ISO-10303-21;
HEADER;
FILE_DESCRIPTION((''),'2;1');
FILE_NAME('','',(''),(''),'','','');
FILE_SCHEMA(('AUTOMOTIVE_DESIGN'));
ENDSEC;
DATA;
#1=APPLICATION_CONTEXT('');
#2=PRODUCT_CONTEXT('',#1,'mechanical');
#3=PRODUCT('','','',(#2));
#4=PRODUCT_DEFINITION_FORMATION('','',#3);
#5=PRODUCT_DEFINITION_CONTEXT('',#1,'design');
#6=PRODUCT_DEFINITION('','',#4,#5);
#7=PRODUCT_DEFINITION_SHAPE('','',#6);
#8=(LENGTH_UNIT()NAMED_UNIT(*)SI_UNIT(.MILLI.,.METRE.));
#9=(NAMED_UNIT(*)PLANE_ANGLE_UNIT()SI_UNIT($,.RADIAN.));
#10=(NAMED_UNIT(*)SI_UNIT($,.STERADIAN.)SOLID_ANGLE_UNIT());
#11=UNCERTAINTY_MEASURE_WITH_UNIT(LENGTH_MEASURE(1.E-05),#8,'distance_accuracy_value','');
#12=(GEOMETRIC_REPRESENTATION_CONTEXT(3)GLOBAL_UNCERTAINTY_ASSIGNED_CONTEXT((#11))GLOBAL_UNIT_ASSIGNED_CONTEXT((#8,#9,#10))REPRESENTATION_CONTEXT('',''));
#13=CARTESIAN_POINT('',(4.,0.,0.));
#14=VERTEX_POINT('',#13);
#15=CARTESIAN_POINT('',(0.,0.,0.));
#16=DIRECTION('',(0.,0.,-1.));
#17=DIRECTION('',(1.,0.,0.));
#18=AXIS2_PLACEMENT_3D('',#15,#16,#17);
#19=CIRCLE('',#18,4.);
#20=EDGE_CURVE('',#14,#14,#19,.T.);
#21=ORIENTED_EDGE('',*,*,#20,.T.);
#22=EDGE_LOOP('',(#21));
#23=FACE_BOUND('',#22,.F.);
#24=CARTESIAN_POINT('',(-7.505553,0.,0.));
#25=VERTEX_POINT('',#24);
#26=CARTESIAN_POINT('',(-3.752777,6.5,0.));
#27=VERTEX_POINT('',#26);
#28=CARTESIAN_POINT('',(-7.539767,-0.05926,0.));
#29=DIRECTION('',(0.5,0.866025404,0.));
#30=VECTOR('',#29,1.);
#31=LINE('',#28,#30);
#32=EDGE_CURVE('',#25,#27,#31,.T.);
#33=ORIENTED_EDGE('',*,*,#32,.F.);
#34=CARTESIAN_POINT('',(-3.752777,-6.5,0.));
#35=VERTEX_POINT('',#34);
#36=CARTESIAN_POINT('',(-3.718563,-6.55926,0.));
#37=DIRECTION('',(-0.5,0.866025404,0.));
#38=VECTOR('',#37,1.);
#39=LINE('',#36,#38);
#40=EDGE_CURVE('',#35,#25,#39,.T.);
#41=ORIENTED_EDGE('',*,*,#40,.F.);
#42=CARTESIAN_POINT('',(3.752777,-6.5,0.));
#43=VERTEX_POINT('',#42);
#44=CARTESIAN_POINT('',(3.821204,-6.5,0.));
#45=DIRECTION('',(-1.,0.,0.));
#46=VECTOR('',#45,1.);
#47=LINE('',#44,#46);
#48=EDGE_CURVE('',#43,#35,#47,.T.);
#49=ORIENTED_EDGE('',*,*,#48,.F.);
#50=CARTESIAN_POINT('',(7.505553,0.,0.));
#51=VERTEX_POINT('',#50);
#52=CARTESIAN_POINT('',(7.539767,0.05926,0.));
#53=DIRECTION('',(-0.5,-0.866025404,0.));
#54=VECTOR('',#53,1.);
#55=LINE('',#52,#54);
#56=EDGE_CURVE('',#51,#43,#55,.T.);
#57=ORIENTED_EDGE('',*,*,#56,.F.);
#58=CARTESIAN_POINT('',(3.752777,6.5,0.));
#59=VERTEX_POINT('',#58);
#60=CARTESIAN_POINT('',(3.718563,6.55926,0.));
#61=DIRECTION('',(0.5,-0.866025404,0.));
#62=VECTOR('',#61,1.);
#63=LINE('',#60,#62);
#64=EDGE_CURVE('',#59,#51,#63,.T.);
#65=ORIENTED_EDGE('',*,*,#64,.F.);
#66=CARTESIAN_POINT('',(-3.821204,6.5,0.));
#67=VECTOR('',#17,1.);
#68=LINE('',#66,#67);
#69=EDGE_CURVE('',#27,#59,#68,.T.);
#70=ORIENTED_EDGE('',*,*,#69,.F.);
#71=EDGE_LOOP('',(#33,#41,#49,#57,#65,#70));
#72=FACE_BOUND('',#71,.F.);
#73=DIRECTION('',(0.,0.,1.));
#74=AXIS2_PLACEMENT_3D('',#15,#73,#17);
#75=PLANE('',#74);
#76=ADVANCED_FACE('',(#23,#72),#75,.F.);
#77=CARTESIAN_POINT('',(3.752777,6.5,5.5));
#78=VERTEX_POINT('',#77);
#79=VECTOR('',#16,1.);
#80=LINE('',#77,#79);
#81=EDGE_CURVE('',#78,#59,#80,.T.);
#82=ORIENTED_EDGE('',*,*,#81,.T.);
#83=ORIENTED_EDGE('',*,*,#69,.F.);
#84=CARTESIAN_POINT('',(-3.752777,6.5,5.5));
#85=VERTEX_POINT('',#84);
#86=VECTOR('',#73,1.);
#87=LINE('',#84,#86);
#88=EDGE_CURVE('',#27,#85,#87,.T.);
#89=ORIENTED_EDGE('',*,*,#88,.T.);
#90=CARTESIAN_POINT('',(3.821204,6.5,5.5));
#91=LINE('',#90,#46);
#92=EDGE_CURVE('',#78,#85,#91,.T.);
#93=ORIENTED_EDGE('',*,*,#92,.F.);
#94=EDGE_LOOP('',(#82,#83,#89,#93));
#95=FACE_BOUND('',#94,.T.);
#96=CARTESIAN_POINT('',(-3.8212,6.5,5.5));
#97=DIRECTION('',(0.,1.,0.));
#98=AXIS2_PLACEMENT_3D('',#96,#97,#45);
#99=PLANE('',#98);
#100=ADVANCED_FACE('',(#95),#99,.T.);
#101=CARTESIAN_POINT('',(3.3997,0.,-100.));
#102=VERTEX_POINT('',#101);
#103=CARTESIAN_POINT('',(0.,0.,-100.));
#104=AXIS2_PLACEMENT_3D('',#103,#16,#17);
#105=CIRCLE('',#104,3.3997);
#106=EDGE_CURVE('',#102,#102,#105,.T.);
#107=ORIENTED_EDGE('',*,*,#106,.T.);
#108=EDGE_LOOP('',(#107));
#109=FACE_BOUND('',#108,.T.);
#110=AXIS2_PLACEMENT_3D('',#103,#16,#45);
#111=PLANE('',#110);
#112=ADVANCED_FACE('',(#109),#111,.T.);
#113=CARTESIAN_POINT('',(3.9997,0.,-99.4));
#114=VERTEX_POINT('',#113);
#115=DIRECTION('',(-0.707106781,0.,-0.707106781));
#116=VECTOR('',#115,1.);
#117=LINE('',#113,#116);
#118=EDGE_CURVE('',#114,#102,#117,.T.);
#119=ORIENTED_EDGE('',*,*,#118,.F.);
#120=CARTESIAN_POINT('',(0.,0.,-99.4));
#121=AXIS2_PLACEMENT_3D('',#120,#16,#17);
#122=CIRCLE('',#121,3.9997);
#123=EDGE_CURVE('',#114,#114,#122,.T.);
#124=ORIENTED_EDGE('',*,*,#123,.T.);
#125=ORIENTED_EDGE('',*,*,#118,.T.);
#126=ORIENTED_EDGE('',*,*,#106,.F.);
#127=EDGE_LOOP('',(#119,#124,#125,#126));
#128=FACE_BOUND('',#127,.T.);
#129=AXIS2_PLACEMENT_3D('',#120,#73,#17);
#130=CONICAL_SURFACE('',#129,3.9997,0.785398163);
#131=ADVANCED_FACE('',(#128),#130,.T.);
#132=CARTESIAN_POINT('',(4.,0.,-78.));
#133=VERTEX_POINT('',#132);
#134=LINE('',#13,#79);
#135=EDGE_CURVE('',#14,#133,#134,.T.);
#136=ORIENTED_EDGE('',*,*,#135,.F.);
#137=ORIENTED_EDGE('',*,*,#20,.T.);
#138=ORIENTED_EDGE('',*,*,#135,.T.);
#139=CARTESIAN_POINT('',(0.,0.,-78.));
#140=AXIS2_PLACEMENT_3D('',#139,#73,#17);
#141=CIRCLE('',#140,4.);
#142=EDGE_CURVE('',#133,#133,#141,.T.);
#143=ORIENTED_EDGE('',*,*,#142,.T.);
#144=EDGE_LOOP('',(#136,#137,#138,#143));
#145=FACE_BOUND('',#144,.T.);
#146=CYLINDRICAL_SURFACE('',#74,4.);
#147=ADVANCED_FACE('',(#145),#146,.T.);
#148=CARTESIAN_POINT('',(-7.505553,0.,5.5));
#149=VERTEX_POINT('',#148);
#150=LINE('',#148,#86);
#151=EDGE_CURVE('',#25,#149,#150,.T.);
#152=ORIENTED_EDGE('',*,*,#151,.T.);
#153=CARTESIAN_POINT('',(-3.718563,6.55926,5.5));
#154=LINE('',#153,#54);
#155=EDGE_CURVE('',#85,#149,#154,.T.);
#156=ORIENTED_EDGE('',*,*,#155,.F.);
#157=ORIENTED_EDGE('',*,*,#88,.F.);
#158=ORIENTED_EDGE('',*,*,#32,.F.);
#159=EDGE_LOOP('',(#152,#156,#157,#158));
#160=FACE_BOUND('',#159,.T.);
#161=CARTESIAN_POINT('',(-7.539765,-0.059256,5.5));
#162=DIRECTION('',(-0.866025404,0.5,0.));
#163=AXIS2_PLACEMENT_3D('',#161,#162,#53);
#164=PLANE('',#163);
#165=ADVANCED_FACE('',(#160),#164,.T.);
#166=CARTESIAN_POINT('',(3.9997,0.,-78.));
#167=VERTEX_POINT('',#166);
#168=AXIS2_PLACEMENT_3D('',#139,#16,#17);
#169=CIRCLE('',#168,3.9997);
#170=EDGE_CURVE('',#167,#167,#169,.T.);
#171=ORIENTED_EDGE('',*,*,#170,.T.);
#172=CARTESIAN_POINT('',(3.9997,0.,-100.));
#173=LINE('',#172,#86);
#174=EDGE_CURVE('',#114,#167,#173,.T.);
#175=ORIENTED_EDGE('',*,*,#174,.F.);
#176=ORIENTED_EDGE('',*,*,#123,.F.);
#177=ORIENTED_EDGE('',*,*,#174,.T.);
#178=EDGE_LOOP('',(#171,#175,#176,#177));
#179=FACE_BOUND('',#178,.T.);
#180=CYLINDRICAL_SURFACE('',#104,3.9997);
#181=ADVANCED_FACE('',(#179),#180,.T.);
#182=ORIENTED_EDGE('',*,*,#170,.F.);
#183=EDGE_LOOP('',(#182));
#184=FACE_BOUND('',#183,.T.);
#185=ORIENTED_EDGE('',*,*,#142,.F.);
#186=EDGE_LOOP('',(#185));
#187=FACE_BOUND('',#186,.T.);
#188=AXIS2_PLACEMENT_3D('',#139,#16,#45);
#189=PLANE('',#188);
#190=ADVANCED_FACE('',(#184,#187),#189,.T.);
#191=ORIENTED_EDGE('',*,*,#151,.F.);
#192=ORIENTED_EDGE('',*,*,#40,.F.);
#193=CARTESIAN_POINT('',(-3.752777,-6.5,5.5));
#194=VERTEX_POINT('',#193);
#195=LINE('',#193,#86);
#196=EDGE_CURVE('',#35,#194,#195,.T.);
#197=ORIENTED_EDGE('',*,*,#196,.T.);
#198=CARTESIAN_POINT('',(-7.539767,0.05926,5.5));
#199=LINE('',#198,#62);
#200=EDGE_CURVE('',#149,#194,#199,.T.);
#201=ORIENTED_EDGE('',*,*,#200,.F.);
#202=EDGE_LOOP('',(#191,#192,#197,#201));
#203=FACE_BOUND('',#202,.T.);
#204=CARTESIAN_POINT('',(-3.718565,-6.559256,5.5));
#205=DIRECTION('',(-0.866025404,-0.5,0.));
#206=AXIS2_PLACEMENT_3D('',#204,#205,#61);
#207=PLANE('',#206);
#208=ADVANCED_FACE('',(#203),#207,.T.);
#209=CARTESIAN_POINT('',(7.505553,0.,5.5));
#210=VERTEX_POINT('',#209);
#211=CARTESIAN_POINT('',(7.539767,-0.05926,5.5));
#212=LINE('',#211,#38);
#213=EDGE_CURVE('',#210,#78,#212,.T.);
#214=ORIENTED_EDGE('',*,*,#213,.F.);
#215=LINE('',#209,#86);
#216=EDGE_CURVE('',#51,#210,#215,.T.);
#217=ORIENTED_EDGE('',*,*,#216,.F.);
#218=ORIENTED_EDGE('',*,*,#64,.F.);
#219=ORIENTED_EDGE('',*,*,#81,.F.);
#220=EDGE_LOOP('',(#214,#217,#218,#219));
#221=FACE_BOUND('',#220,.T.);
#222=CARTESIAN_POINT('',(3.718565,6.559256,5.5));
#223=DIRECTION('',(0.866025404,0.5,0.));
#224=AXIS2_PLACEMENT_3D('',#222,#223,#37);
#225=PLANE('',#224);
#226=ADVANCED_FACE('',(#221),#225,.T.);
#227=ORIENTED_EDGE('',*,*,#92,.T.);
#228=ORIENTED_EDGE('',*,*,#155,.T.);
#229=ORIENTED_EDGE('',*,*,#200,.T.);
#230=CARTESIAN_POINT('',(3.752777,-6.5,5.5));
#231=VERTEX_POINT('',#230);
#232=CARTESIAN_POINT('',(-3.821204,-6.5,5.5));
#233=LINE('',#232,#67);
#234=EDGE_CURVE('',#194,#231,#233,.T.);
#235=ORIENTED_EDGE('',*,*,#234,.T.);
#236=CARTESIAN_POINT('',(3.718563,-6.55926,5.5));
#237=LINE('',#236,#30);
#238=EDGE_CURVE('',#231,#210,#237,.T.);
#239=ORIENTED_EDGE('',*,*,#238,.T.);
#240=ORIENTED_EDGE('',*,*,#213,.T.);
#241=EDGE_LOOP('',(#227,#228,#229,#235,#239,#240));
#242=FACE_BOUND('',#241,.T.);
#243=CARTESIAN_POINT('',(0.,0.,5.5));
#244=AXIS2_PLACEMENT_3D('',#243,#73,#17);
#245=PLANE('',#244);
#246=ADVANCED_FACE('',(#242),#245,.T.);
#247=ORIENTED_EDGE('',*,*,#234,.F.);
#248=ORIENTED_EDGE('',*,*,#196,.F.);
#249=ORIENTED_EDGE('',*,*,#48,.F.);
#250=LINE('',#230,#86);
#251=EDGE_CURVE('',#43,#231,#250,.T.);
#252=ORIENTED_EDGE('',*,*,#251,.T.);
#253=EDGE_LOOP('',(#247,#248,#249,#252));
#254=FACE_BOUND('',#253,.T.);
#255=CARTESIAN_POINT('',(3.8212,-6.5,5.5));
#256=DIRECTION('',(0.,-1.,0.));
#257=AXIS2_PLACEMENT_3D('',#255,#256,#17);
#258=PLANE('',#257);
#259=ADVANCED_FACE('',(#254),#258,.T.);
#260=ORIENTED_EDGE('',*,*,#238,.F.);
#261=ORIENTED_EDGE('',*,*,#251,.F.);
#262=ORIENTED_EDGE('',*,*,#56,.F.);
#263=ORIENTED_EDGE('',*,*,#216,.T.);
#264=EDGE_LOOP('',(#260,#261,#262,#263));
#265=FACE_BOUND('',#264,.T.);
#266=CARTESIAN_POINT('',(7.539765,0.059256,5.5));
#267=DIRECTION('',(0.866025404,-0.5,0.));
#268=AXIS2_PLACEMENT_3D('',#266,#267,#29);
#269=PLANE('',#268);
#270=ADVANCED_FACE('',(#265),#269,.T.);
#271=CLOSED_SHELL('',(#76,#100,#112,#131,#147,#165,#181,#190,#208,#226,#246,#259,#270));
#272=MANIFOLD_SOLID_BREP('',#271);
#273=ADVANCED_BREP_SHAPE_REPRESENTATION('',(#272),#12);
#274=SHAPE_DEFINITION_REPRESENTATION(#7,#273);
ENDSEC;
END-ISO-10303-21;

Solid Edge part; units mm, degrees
sketch "Sketch1" plane through (0, 0, 0) normal (0, 0, 1) x (1, 0, 0)
  circle A0 centre (0, 0) radius 7.54
  dimension "D1" = 15.08
extrude "Protrusion1" add sketch "Sketch1" along normal blind 5.5
sketch "Sketch2" plane through (0, 0, 0) normal (0, 0, -1) x (1, 0, 0)
  circle A0 centre (0, 0) radius 4
extrude "Protrusion2" add sketch "Sketch2" along normal blind 100
sketch "Sketch3" plane through (0, 0, -100) normal (0, 0, -1) x (1, 0, 0)
  circle A0 centre (0, 0) radius 3.9997
extrude "Cutout1" cut sketch "Sketch3" against normal blind 22 flip side to cut
chamfer "Chamfer_1" distance 0.6 angle 45 1 edges at (-3.9997, 0, -100)
sketch "Sketch4" plane through (0, 0, 5.5) normal (0, 0, 1) x (1, 0, 0)
  line L0 (-3.8212, 6.5) -> (3.8212, 6.5)
  dimension "D1" = 13
extrude "Cutout2" cut sketch "Sketch4" against normal up to next material side at (0, 6.55, 5.5)
pattern_circular "Pattern1" count 6 over 360 about axis through (0, 0, 5.5) along (0, 0, 1) of "Cutout2"
properties part number "116363"
